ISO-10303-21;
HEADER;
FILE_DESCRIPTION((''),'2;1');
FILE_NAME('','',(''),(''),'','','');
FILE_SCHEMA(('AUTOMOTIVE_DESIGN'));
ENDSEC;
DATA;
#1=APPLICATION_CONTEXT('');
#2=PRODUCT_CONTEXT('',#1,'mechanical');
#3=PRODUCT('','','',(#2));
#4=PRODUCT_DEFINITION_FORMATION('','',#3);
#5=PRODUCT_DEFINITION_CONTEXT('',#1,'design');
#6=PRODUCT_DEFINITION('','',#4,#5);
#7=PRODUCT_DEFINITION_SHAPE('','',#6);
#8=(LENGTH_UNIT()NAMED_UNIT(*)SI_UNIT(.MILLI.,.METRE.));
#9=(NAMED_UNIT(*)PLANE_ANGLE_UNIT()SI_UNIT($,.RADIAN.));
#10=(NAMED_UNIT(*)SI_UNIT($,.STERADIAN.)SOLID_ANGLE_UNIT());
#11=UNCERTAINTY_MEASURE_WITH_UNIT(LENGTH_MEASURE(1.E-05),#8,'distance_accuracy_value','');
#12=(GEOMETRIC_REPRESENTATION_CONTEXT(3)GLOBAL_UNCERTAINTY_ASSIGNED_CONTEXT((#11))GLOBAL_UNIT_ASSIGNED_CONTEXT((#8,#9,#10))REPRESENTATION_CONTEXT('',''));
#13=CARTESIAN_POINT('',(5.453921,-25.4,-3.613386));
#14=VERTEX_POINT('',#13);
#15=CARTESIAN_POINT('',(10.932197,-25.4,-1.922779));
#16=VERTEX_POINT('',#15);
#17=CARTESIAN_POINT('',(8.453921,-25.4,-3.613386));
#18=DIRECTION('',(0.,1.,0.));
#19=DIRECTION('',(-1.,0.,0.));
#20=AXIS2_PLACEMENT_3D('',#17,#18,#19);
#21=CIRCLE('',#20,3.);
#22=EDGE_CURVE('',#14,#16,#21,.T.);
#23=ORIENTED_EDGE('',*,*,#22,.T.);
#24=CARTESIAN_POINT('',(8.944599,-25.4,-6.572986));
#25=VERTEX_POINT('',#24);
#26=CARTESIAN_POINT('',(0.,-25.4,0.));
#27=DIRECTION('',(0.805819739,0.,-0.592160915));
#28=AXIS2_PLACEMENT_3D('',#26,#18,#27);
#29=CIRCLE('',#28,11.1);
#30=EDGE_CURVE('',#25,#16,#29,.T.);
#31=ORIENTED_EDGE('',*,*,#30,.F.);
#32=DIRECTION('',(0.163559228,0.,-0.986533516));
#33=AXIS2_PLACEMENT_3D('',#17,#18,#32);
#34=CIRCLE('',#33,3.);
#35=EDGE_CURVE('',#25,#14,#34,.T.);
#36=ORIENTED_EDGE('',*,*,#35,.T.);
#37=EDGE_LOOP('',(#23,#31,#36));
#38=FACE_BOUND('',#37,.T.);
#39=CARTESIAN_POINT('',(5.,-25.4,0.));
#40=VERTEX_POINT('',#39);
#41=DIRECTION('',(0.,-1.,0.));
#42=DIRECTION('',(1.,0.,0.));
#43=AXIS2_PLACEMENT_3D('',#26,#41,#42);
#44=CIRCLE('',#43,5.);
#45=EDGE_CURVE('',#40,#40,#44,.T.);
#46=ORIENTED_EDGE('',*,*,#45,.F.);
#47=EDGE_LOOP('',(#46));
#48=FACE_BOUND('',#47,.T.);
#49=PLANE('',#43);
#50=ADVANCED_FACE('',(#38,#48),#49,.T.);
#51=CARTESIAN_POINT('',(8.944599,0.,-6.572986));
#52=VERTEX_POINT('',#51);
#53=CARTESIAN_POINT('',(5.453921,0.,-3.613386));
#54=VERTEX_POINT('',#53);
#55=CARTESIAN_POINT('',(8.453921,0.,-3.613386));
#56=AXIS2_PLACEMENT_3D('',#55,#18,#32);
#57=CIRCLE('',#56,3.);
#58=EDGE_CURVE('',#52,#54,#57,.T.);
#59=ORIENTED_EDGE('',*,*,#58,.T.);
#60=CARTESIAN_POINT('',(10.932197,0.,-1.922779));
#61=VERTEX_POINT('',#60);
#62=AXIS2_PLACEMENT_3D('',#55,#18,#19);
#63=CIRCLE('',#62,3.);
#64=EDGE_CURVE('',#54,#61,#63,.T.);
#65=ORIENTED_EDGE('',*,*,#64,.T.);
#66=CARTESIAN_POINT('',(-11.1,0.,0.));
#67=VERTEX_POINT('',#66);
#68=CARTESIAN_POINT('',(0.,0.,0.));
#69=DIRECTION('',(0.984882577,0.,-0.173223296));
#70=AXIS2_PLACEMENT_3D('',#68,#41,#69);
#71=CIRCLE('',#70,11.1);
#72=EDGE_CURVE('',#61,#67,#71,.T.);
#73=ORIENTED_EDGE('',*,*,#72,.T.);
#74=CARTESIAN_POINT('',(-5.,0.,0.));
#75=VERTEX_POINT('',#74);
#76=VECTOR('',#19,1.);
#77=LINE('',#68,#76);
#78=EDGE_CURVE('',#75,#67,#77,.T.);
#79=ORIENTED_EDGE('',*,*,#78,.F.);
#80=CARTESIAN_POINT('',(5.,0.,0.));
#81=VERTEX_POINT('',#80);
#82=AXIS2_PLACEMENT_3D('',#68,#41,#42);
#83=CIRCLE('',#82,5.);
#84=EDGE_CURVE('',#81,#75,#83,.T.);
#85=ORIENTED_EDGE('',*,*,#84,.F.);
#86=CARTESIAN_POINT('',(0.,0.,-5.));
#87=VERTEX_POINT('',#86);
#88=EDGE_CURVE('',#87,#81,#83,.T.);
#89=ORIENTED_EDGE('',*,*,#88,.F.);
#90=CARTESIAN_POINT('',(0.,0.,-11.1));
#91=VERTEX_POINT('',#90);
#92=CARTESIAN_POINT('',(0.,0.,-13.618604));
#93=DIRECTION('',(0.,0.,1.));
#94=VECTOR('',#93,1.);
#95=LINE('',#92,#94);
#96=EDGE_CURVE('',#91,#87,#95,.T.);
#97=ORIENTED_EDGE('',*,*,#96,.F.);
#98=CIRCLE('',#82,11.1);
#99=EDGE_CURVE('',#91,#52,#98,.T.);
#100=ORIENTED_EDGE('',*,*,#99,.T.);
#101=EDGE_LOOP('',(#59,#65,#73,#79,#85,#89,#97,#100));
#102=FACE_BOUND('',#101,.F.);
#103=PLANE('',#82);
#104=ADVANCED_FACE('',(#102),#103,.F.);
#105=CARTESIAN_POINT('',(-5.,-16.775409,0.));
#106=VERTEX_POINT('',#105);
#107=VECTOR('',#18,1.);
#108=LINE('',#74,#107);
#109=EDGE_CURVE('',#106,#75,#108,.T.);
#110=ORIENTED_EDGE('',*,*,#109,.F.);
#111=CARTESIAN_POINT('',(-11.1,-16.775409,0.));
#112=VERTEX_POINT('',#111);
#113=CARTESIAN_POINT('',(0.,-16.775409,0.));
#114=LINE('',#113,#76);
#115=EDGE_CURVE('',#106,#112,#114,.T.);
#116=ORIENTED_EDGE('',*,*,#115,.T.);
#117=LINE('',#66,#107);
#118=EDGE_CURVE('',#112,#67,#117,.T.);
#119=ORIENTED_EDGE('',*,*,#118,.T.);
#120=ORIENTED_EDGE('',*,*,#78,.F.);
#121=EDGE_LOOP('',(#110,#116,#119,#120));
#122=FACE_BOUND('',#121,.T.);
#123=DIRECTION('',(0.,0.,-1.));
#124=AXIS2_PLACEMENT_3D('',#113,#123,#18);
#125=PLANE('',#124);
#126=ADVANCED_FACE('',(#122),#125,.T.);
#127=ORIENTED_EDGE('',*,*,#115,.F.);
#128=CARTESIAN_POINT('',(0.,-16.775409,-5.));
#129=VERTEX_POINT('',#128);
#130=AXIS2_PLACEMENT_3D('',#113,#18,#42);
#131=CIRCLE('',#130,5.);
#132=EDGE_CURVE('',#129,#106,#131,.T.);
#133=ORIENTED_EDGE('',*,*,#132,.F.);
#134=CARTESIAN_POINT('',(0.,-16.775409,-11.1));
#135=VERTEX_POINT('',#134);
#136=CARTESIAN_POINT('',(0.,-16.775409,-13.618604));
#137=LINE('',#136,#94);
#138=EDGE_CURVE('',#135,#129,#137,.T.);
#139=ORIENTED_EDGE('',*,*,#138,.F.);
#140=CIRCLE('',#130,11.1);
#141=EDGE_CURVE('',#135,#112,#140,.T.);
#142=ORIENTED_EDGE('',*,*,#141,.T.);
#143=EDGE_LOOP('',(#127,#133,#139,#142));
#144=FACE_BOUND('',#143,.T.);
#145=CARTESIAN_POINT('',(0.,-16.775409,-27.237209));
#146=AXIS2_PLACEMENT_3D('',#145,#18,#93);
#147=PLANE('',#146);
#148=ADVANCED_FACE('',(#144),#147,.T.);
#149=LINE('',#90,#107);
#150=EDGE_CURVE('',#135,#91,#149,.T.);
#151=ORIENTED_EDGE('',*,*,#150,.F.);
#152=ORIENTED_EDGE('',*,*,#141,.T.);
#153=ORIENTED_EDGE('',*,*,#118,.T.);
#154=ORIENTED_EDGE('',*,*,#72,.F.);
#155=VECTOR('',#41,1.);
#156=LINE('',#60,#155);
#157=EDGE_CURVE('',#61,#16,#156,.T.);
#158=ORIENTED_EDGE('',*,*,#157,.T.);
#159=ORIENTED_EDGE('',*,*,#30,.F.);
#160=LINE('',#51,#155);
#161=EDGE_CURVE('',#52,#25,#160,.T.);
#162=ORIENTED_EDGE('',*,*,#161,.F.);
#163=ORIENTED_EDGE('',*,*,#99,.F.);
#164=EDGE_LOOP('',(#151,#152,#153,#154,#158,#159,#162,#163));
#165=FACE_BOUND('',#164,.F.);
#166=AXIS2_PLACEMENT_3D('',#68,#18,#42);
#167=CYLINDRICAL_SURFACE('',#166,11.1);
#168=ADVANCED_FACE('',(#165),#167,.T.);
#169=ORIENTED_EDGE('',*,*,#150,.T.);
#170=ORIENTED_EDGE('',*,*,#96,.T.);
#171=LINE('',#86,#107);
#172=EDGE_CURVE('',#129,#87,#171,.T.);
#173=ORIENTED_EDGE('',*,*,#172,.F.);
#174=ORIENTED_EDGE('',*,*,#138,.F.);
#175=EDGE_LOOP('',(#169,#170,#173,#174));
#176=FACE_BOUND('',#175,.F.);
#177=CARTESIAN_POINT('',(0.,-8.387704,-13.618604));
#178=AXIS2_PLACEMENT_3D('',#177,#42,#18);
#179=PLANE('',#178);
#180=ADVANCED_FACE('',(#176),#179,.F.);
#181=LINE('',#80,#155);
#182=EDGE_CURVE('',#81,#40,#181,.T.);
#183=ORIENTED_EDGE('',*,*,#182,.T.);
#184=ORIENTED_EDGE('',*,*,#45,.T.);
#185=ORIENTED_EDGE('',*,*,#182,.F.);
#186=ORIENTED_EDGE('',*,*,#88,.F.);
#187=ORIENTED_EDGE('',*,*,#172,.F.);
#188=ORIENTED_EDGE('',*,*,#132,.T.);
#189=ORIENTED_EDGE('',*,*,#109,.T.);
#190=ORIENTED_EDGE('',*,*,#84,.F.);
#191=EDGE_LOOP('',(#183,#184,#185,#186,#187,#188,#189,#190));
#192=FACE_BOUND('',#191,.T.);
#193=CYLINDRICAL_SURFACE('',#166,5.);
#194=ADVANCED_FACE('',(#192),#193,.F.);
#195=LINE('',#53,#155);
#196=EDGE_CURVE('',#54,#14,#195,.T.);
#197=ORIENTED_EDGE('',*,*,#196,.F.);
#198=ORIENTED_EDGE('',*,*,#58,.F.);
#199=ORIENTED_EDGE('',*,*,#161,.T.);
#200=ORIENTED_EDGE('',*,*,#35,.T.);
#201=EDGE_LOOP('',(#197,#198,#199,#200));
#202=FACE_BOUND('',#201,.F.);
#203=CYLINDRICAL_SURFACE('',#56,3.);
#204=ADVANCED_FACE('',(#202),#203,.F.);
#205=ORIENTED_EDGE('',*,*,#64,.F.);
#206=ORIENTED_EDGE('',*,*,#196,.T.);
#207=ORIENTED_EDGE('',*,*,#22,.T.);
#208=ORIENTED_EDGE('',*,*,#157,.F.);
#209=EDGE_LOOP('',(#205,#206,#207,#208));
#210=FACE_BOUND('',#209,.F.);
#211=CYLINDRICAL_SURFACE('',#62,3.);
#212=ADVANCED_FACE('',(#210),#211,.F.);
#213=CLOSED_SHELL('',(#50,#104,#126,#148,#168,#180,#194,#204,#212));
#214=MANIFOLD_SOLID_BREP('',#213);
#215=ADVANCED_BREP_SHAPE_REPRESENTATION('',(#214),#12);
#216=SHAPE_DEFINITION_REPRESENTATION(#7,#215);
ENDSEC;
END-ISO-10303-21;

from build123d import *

# Parameters (mm, degrees)
F0_R     = 11.1
F0_R_2   = 5
F1_DEPTH = 25.4
F2_W     = 16.7754087597
F2_H     = 27.2372085601
F3_DEPTH = 76.2
F5_DEPTH = 25.401


with BuildPart() as f1:
    # F0 (on Front) → F1 (new body)
    with BuildSketch(Plane.XZ):
        Circle(F0_R)
        Circle(F0_R_2, mode=Mode.SUBTRACT)
    extrude(amount=F1_DEPTH)

    # F2 (on Right) → F3 (cut)
    with BuildSketch(Plane.YZ):
        with Locations((-8.3877043799, -13.6186042801)):
            Rectangle(F2_W, F2_H)
    extrude(amount=-F3_DEPTH, mode=Mode.SUBTRACT)

    # F4 (on face) → F5 (cut, through all)
    with BuildSketch(Plane(origin=(0, 0, 0), x_dir=(-1, 0, 0), z_dir=(0, 1, 0))):
        with BuildLine():
            ThreePointArc((-8.9445990977, -6.572986154), (-6.5138225835, -5.901619973), (-5.4539214149, -3.6133856047))
            ThreePointArc((-5.4539214149, -3.6133856047), (-7.5692818154, -0.7467826013), (-10.9321966009, -1.9227785828))
            ThreePointArc((-10.9321966009, -1.9227785828), (-10.2067555778, -4.3625841625), (-8.9445990977, -6.572986154))
        make_face()
    extrude(amount=-F5_DEPTH, mode=Mode.SUBTRACT)


solid = f1.part
